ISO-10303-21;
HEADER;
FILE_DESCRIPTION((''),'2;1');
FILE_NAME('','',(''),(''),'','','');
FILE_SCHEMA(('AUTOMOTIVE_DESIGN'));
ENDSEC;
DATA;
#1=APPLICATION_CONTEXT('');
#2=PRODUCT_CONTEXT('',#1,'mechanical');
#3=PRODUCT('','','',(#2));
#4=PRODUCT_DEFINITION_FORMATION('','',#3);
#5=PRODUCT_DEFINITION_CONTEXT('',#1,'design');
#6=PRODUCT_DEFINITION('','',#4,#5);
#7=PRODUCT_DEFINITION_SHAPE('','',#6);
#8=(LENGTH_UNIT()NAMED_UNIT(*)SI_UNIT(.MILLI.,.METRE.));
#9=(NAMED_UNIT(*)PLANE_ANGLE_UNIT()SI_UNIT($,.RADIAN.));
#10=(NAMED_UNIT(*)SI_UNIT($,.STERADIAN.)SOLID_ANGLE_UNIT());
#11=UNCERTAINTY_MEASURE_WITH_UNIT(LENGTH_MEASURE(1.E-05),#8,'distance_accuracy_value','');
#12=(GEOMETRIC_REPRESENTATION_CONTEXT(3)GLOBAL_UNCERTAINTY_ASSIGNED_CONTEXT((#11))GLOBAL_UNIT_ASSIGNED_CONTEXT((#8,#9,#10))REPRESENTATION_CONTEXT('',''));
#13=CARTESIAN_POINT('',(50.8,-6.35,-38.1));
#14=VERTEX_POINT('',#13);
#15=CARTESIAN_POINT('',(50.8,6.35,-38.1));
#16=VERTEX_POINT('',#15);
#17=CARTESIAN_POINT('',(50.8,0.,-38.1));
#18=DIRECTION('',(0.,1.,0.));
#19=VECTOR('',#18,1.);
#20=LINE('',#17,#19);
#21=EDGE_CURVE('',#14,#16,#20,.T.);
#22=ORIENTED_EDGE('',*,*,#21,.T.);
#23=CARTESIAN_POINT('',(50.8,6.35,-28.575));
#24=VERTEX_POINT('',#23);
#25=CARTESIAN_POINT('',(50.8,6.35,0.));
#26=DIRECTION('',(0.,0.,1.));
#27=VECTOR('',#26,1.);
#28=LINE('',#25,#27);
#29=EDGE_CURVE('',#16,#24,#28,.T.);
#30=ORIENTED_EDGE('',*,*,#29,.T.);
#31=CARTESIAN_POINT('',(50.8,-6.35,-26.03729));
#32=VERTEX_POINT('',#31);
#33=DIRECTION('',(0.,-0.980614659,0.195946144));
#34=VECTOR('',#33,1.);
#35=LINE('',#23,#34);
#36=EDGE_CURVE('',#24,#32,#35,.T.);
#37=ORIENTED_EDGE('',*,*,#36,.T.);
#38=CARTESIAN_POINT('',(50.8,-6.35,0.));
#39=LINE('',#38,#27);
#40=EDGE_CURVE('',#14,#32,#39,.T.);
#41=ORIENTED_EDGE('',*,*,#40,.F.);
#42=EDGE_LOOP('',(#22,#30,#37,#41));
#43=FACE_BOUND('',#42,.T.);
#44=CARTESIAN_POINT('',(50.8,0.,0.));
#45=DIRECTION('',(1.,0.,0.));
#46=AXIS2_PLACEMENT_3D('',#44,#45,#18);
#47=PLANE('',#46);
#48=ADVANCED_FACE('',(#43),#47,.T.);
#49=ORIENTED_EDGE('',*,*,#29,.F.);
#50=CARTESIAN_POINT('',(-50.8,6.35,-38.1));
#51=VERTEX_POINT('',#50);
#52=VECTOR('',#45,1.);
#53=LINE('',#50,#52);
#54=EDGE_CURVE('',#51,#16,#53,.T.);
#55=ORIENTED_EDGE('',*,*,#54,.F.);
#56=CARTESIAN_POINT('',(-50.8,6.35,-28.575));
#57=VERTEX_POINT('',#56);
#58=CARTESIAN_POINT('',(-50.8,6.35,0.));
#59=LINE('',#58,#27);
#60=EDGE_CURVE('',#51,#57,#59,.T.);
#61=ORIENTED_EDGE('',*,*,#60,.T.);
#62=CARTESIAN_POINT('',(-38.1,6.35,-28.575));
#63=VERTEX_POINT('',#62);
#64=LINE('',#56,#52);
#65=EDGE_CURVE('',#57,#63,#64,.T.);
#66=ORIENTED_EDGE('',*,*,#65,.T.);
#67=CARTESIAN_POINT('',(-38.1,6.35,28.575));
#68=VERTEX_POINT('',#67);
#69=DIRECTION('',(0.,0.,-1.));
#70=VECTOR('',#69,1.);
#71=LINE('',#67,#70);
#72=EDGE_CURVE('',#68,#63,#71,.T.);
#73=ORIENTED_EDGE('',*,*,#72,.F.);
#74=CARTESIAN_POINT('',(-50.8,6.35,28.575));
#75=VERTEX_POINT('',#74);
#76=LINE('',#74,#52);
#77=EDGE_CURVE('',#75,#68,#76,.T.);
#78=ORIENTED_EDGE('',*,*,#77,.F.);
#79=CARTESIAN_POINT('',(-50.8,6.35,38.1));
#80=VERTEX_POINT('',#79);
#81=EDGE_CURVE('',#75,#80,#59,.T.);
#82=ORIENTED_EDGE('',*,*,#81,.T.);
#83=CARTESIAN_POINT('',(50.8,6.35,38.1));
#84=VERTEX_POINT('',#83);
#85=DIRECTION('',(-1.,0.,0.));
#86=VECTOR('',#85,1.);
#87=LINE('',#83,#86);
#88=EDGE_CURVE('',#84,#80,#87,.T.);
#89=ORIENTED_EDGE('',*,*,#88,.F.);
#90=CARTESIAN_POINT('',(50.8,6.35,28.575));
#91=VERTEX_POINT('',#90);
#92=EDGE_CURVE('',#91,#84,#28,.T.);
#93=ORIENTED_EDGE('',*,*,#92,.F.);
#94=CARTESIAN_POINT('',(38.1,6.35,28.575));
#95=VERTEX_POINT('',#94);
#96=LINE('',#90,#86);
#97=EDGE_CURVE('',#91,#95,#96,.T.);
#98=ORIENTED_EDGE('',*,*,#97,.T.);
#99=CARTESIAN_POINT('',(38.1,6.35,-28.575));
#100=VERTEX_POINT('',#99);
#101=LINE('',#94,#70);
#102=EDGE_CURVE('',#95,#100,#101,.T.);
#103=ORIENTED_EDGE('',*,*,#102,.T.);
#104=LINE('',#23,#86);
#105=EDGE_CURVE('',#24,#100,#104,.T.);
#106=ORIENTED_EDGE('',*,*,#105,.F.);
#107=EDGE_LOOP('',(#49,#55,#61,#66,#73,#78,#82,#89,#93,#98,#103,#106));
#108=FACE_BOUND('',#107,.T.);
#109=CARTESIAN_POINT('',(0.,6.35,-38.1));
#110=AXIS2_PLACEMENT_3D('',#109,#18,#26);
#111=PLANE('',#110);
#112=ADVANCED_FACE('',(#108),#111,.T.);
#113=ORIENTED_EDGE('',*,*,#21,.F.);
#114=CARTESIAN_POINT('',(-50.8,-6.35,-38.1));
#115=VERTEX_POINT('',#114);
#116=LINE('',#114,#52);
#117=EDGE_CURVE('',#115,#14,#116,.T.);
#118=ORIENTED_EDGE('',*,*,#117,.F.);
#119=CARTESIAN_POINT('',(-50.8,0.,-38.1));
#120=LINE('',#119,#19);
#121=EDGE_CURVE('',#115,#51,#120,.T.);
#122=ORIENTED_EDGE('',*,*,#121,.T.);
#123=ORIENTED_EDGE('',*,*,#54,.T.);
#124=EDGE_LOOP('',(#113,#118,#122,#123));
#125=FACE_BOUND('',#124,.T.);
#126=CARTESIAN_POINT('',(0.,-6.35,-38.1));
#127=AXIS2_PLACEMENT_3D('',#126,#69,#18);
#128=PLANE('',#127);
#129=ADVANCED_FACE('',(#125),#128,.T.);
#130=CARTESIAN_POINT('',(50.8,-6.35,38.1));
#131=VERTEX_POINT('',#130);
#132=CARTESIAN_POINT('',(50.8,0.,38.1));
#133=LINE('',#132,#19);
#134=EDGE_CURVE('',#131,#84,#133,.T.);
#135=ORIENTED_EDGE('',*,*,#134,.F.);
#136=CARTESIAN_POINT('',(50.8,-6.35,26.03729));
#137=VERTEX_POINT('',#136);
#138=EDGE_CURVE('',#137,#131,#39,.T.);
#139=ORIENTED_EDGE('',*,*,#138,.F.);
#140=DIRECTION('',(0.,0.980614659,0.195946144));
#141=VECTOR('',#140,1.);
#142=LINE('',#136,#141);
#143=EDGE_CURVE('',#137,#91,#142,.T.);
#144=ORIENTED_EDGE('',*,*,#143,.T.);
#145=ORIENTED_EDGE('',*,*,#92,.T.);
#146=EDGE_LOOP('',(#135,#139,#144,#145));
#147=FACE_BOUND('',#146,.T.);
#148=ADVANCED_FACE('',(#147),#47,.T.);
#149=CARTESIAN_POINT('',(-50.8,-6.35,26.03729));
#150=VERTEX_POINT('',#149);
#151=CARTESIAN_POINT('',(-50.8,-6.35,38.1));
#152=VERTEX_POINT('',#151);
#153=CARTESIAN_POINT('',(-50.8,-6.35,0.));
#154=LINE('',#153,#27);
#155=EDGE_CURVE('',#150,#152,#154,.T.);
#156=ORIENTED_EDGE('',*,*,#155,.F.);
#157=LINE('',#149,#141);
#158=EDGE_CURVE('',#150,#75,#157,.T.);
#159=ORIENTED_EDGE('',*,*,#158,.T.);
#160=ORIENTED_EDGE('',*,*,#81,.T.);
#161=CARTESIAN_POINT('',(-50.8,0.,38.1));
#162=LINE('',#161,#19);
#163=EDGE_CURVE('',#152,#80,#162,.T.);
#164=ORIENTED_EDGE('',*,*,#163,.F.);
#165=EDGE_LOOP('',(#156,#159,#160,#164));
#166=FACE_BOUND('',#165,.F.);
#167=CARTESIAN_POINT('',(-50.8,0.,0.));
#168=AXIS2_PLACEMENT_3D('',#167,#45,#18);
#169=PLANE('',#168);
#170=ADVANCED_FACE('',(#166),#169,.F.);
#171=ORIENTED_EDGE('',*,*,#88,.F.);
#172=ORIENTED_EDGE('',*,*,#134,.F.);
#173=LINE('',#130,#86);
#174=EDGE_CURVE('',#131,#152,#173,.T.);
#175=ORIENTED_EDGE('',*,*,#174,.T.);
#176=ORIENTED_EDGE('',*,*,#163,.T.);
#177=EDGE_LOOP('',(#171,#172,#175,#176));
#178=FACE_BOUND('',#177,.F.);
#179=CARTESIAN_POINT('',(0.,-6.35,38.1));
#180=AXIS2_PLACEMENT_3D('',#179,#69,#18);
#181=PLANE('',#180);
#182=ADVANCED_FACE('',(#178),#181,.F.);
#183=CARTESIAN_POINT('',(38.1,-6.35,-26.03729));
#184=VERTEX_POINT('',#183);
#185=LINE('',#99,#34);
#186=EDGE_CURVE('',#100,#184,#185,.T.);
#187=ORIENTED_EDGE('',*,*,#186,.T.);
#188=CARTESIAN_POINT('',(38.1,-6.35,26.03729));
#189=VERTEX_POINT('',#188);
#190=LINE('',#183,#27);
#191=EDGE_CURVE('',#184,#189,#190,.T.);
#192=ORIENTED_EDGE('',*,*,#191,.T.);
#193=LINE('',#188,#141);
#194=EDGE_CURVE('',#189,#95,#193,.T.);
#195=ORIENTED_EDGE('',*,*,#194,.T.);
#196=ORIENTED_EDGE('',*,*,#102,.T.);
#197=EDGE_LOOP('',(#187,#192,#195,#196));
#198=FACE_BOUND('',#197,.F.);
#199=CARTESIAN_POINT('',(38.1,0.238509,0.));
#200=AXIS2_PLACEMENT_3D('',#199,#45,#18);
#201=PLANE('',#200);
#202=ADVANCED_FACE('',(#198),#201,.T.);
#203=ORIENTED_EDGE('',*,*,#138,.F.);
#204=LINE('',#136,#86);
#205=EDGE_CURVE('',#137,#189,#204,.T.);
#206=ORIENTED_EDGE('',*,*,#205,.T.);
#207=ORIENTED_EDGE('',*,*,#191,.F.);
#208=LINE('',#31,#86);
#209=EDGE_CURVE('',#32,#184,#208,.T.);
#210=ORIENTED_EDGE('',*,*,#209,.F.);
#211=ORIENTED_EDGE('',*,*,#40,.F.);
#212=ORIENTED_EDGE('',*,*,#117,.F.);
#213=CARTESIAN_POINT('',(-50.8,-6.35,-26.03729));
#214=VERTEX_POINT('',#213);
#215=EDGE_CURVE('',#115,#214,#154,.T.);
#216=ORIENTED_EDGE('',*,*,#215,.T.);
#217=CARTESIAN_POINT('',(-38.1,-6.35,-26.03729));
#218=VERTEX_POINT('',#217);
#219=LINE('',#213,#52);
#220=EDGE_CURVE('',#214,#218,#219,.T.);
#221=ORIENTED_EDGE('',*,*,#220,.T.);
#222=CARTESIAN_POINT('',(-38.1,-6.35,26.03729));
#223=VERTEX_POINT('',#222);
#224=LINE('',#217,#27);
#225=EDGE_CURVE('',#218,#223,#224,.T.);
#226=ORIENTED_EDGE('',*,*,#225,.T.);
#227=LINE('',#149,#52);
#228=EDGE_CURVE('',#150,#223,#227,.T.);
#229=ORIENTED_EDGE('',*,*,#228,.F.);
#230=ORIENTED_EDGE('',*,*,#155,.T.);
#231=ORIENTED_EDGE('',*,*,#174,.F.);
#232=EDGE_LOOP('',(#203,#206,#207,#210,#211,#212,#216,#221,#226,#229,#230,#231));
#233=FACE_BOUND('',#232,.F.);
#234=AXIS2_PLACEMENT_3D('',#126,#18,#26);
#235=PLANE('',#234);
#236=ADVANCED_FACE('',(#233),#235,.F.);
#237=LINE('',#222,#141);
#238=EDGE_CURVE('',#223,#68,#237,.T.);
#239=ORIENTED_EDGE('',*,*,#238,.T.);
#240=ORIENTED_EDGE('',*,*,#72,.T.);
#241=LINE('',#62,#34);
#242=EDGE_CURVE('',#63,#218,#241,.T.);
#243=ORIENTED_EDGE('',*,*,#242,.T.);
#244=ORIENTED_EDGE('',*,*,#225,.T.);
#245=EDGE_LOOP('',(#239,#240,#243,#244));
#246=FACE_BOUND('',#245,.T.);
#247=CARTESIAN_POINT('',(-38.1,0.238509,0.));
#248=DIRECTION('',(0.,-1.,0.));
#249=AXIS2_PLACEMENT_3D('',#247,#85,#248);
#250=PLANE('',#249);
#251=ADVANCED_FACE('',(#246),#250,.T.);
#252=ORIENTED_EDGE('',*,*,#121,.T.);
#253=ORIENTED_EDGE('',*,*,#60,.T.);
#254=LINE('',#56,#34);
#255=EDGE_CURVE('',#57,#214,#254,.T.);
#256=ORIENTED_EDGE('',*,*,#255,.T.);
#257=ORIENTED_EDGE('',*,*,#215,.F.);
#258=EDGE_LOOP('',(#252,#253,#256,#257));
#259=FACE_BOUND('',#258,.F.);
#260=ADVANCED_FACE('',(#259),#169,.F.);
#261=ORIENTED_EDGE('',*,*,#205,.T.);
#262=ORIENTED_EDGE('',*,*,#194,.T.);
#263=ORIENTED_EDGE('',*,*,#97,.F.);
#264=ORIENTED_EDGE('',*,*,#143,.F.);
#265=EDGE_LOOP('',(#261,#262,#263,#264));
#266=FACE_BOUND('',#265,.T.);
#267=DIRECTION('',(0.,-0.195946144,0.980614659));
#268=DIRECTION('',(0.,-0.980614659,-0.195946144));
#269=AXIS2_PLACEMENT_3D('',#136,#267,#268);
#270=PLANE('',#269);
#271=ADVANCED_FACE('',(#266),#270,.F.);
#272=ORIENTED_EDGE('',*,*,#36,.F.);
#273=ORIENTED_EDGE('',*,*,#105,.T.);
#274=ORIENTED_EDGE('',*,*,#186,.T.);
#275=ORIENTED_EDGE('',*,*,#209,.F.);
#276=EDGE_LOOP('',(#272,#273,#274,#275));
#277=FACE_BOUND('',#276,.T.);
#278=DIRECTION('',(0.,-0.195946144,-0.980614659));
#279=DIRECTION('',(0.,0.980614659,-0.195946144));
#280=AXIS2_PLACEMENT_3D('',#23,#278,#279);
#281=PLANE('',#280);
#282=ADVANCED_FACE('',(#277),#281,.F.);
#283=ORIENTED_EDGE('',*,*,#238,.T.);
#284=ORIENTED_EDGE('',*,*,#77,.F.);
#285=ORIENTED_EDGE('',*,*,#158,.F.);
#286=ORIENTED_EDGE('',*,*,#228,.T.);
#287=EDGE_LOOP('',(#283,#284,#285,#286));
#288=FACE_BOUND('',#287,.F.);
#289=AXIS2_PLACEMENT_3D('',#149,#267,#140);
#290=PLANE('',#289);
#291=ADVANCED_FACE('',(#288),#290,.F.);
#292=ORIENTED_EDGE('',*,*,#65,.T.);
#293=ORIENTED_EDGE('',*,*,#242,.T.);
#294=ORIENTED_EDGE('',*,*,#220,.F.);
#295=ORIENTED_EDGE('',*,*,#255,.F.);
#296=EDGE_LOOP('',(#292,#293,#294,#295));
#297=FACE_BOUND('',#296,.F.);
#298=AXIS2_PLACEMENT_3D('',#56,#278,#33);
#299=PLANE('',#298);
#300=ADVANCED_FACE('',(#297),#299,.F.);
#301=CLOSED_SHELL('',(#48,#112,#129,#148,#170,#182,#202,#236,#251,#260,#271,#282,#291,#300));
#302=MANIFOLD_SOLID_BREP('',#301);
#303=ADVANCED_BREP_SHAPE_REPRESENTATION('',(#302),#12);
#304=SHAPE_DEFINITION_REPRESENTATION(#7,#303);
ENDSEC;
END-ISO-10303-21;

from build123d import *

# Parameters (mm, degrees)
F0_W     = 12.7
F0_H     = 76.2
F1_DEPTH = 50.8
F3_DEPTH = 12.7


# Not quite as in the source:
# - a pattern or mirror of a feature is missing from the dataset's text; its kind, count and spacing are read off the source's solid


with BuildPart() as f1:
    # F0 (on Right) → F1 (new body, symmetric)
    with BuildSketch(Plane.YZ):
        Rectangle(F0_W, F0_H)
    extrude(amount=F1_DEPTH, both=True)

    # F2 (on face) → F3 (cut)
    with BuildSketch(Plane(origin=(-50.8, 0, 0), x_dir=(0, -1, 0), z_dir=(-1, 0, 0))):
        Polygon((6.35, -26.0372895852), (6.35, 26.0372895852), (-6.35, 28.575), (-6.35, -28.575), align=None)
    f3 = extrude(amount=-F3_DEPTH, mode=Mode.SUBTRACT)

    # F3_copies: F3 across plane
    add(f3.mirror(Plane(origin=(0, 0, 0), x_dir=(0, 0, 1), z_dir=(1, 0, 0))), mode=Mode.SUBTRACT)


solid = f1.part
